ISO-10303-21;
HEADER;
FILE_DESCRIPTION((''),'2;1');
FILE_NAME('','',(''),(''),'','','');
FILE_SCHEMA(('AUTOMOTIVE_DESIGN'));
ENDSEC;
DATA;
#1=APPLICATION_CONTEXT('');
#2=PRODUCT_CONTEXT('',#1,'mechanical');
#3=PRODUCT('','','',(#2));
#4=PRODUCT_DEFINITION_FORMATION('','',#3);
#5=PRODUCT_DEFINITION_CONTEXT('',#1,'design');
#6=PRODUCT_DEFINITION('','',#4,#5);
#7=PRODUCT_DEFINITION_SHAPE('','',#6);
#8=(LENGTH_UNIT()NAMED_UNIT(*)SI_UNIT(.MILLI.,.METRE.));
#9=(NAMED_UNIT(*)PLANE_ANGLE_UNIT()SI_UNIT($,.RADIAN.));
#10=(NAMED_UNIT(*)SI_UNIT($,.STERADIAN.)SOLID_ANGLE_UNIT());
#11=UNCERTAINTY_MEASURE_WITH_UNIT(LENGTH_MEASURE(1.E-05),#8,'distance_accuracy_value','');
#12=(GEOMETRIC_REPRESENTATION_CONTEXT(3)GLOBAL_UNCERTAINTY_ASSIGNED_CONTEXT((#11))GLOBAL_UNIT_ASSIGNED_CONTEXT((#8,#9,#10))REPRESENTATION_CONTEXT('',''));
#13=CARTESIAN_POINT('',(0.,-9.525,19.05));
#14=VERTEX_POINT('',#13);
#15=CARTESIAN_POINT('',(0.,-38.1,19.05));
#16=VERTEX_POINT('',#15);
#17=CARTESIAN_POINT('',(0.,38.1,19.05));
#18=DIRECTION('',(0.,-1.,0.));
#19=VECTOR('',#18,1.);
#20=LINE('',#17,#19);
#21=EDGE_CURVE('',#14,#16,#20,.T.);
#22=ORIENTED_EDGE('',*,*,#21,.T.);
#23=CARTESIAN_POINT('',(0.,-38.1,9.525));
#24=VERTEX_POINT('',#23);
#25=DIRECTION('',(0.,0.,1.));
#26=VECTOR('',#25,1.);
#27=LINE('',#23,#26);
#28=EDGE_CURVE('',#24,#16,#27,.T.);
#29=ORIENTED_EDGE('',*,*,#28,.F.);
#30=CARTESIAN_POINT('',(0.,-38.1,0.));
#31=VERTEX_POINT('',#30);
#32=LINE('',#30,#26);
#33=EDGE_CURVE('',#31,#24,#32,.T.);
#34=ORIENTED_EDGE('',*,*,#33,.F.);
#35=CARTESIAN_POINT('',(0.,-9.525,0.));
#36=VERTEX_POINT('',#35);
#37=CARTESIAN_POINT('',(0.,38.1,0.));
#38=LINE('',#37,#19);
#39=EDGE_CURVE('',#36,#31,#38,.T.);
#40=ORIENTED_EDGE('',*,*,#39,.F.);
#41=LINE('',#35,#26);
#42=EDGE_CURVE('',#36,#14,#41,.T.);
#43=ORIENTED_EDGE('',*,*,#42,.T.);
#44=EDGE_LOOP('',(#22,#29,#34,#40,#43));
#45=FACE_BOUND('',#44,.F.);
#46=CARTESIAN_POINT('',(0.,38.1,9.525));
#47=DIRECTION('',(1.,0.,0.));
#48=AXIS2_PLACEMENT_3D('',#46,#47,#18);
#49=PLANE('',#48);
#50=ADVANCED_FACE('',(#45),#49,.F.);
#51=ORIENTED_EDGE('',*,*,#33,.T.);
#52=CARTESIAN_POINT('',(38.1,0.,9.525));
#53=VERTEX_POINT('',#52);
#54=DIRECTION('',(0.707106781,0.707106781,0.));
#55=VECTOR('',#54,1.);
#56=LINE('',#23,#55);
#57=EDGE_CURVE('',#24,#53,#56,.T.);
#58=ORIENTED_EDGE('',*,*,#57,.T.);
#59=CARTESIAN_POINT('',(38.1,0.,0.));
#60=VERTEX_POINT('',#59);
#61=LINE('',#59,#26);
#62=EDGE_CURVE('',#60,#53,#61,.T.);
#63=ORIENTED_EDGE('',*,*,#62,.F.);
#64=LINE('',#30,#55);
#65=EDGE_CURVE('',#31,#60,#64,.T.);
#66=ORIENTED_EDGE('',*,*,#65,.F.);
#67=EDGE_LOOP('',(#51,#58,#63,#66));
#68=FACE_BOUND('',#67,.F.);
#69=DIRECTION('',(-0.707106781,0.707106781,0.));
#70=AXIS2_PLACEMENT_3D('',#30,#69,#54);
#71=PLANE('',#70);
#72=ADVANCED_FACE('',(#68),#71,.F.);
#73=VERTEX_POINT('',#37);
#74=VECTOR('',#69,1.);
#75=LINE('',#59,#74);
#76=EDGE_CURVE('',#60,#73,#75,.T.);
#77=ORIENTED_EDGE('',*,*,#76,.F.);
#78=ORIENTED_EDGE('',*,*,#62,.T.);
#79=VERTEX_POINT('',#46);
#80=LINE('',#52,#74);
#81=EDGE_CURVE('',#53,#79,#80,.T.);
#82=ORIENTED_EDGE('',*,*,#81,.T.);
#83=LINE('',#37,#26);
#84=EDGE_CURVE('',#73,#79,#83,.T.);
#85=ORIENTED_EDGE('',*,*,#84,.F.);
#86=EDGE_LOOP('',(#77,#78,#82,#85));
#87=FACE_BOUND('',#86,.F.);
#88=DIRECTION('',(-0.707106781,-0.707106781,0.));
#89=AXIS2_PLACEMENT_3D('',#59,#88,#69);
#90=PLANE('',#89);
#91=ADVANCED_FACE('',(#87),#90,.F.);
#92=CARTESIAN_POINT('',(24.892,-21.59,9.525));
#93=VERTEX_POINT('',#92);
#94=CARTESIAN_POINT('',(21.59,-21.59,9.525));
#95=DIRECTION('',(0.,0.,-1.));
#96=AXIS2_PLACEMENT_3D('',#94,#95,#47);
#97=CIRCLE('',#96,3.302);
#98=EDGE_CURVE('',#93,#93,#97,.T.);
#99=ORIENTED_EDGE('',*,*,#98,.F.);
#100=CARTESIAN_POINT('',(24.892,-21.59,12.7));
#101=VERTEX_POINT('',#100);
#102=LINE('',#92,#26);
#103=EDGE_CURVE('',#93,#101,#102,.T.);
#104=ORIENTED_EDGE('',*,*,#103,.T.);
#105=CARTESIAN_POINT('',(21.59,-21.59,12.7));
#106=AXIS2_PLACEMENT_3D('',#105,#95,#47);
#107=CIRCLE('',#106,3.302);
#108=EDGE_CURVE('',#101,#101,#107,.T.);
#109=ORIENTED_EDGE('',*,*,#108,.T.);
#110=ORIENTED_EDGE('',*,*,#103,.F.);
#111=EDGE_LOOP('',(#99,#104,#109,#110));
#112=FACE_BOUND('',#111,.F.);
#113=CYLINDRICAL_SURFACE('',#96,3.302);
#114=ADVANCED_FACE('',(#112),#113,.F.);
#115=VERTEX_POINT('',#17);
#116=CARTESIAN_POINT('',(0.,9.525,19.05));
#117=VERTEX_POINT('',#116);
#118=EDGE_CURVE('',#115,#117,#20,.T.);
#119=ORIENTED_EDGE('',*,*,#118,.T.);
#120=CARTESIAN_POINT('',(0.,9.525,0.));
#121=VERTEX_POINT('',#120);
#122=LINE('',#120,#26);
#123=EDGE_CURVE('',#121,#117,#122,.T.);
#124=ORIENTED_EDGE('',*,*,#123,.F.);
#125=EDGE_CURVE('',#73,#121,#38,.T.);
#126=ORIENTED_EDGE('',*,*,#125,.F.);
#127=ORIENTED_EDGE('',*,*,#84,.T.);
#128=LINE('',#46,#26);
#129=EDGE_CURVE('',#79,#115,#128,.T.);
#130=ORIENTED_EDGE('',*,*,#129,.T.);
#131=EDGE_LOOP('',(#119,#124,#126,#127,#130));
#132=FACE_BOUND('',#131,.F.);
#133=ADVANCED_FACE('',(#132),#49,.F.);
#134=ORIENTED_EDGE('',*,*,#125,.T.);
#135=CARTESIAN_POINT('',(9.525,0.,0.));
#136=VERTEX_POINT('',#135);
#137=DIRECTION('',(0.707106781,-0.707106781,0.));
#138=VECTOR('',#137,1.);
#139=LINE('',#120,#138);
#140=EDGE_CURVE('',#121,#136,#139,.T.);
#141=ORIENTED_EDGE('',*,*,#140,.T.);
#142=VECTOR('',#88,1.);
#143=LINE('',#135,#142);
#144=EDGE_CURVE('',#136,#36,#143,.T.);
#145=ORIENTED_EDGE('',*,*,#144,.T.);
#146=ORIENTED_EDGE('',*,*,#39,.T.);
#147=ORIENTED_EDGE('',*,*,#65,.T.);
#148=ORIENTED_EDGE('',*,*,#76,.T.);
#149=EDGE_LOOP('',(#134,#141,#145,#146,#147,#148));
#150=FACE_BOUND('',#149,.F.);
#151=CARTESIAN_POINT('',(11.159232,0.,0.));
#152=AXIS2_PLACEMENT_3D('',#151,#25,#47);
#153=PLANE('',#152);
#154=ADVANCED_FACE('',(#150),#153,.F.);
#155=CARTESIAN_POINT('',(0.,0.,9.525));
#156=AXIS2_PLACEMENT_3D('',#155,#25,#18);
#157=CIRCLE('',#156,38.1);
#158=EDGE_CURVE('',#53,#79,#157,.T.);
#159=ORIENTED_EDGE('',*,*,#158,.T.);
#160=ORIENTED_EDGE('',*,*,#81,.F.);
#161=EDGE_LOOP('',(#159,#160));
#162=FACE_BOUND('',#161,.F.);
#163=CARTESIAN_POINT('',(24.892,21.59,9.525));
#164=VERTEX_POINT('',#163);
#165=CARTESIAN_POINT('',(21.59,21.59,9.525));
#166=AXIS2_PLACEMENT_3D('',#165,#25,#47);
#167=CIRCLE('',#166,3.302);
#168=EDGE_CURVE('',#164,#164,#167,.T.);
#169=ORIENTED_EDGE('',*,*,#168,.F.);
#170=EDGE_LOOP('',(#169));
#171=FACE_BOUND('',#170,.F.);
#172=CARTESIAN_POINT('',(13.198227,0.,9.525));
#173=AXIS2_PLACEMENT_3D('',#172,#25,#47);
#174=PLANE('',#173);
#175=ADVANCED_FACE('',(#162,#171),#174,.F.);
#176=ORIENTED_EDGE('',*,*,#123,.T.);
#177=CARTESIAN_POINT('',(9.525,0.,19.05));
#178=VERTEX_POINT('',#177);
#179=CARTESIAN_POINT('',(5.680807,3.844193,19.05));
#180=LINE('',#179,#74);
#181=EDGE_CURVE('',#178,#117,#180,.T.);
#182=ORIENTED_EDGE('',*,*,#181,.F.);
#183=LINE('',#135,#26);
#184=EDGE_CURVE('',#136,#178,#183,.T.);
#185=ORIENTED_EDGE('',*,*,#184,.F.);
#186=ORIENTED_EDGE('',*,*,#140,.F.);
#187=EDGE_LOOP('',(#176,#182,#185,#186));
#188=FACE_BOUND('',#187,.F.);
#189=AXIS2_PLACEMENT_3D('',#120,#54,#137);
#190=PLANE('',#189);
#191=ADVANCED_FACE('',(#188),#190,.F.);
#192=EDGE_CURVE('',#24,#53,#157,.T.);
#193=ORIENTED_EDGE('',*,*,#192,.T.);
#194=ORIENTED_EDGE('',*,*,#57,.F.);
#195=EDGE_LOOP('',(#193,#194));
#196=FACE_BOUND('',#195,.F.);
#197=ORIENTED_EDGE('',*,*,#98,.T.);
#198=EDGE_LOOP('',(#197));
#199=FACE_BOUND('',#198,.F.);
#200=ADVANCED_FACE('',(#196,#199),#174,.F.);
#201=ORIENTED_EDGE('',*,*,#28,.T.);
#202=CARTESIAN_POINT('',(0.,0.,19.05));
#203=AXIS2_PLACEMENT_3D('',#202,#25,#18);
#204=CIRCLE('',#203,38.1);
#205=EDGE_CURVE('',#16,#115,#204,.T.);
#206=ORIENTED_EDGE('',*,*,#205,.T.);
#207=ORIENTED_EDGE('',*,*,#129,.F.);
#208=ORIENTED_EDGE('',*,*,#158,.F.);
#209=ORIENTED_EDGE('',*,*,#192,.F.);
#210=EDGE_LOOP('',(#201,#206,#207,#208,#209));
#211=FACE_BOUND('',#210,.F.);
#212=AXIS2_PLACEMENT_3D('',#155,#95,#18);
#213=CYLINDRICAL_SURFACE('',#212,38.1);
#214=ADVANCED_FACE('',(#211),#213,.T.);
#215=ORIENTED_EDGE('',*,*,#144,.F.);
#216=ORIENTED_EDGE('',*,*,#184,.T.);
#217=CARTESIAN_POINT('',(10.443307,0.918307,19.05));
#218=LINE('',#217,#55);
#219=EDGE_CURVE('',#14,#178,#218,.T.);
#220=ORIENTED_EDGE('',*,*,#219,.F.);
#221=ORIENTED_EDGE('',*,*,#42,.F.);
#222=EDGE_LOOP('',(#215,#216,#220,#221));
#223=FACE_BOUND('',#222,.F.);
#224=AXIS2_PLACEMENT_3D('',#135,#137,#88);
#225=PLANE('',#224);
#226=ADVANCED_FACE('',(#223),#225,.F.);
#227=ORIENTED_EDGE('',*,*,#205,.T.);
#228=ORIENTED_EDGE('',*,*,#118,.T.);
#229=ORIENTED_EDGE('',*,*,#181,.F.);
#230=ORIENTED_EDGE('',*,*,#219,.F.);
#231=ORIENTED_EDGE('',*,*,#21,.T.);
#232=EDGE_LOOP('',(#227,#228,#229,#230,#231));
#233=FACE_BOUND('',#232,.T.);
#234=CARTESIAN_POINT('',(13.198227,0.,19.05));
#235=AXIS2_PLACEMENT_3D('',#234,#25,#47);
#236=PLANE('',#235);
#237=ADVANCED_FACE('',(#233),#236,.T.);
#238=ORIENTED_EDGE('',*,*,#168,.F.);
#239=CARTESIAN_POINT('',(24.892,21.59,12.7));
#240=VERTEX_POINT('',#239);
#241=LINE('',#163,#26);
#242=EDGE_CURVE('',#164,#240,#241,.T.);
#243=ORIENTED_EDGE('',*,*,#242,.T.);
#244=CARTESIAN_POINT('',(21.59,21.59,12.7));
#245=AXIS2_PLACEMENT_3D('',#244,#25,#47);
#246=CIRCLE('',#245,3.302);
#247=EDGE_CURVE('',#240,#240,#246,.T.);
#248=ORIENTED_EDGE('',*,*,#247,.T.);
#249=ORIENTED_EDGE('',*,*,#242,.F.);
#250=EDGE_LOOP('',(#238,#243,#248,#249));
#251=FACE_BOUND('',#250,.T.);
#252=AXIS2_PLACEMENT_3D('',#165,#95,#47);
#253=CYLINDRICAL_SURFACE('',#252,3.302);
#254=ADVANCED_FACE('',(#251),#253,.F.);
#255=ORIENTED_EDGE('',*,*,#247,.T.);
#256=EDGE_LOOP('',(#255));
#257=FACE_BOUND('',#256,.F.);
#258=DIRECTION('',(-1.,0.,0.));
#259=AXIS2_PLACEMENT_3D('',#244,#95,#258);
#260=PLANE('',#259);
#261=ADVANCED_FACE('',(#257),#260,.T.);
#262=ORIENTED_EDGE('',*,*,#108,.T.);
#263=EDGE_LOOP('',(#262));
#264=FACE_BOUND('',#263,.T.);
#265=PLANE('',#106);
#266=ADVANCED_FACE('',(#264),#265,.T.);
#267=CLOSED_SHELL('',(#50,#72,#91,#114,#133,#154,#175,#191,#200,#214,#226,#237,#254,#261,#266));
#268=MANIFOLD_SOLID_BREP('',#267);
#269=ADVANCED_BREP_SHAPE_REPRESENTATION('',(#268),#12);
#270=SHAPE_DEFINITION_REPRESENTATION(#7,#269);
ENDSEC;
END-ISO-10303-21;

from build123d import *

# Parameters (mm, degrees)
F1_DEPTH = 9.525
F3_DEPTH = 9.525
F5_DEPTH = 25.4
F6_R     = 3.302
F7_DEPTH = 3.175


# Not quite as in the source:
# - a pattern or mirror of a feature is missing from the dataset's text; its kind, count and spacing are read off the source's solid


with BuildPart() as f1:
    # F0 (on Top) → F1 (new body)
    with BuildSketch(Plane.XY):
        Polygon((38.1, 0), (0, 38.1), (0, -38.1), align=None)
    extrude(amount=F1_DEPTH)

    # F2 (on face) → F3 (join)
    with BuildSketch(Plane.XY.offset(9.525)):
        with BuildLine():
            ThreePointArc((0, -38.1), (38.1, 0), (0, 38.1))
            Line((0, 38.1), (0, -38.1))
        make_face()
    extrude(amount=F3_DEPTH)

    # F4 (on face) → F5 (cut)
    with BuildSketch(Plane(origin=(0, 0, 0), x_dir=(1, 0, 0), z_dir=(0, 0, -1))):
        Polygon((9.525, 0), (0, 9.525), (0, -9.525), align=None)
    extrude(amount=-F5_DEPTH, mode=Mode.SUBTRACT)

    # F6 (on face) → F7 (cut)
    with BuildSketch(Plane(origin=(0, 0, 9.525), x_dir=(1, 0, 0), z_dir=(0, 0, -1))):
        with Locations((21.59, 21.59)):
            Circle(F6_R)
    f7 = extrude(amount=-F7_DEPTH, mode=Mode.SUBTRACT)

    # F7_copies: F7 across plane
    add(f7.mirror(Plane.ZX), mode=Mode.SUBTRACT)


solid = f1.part
